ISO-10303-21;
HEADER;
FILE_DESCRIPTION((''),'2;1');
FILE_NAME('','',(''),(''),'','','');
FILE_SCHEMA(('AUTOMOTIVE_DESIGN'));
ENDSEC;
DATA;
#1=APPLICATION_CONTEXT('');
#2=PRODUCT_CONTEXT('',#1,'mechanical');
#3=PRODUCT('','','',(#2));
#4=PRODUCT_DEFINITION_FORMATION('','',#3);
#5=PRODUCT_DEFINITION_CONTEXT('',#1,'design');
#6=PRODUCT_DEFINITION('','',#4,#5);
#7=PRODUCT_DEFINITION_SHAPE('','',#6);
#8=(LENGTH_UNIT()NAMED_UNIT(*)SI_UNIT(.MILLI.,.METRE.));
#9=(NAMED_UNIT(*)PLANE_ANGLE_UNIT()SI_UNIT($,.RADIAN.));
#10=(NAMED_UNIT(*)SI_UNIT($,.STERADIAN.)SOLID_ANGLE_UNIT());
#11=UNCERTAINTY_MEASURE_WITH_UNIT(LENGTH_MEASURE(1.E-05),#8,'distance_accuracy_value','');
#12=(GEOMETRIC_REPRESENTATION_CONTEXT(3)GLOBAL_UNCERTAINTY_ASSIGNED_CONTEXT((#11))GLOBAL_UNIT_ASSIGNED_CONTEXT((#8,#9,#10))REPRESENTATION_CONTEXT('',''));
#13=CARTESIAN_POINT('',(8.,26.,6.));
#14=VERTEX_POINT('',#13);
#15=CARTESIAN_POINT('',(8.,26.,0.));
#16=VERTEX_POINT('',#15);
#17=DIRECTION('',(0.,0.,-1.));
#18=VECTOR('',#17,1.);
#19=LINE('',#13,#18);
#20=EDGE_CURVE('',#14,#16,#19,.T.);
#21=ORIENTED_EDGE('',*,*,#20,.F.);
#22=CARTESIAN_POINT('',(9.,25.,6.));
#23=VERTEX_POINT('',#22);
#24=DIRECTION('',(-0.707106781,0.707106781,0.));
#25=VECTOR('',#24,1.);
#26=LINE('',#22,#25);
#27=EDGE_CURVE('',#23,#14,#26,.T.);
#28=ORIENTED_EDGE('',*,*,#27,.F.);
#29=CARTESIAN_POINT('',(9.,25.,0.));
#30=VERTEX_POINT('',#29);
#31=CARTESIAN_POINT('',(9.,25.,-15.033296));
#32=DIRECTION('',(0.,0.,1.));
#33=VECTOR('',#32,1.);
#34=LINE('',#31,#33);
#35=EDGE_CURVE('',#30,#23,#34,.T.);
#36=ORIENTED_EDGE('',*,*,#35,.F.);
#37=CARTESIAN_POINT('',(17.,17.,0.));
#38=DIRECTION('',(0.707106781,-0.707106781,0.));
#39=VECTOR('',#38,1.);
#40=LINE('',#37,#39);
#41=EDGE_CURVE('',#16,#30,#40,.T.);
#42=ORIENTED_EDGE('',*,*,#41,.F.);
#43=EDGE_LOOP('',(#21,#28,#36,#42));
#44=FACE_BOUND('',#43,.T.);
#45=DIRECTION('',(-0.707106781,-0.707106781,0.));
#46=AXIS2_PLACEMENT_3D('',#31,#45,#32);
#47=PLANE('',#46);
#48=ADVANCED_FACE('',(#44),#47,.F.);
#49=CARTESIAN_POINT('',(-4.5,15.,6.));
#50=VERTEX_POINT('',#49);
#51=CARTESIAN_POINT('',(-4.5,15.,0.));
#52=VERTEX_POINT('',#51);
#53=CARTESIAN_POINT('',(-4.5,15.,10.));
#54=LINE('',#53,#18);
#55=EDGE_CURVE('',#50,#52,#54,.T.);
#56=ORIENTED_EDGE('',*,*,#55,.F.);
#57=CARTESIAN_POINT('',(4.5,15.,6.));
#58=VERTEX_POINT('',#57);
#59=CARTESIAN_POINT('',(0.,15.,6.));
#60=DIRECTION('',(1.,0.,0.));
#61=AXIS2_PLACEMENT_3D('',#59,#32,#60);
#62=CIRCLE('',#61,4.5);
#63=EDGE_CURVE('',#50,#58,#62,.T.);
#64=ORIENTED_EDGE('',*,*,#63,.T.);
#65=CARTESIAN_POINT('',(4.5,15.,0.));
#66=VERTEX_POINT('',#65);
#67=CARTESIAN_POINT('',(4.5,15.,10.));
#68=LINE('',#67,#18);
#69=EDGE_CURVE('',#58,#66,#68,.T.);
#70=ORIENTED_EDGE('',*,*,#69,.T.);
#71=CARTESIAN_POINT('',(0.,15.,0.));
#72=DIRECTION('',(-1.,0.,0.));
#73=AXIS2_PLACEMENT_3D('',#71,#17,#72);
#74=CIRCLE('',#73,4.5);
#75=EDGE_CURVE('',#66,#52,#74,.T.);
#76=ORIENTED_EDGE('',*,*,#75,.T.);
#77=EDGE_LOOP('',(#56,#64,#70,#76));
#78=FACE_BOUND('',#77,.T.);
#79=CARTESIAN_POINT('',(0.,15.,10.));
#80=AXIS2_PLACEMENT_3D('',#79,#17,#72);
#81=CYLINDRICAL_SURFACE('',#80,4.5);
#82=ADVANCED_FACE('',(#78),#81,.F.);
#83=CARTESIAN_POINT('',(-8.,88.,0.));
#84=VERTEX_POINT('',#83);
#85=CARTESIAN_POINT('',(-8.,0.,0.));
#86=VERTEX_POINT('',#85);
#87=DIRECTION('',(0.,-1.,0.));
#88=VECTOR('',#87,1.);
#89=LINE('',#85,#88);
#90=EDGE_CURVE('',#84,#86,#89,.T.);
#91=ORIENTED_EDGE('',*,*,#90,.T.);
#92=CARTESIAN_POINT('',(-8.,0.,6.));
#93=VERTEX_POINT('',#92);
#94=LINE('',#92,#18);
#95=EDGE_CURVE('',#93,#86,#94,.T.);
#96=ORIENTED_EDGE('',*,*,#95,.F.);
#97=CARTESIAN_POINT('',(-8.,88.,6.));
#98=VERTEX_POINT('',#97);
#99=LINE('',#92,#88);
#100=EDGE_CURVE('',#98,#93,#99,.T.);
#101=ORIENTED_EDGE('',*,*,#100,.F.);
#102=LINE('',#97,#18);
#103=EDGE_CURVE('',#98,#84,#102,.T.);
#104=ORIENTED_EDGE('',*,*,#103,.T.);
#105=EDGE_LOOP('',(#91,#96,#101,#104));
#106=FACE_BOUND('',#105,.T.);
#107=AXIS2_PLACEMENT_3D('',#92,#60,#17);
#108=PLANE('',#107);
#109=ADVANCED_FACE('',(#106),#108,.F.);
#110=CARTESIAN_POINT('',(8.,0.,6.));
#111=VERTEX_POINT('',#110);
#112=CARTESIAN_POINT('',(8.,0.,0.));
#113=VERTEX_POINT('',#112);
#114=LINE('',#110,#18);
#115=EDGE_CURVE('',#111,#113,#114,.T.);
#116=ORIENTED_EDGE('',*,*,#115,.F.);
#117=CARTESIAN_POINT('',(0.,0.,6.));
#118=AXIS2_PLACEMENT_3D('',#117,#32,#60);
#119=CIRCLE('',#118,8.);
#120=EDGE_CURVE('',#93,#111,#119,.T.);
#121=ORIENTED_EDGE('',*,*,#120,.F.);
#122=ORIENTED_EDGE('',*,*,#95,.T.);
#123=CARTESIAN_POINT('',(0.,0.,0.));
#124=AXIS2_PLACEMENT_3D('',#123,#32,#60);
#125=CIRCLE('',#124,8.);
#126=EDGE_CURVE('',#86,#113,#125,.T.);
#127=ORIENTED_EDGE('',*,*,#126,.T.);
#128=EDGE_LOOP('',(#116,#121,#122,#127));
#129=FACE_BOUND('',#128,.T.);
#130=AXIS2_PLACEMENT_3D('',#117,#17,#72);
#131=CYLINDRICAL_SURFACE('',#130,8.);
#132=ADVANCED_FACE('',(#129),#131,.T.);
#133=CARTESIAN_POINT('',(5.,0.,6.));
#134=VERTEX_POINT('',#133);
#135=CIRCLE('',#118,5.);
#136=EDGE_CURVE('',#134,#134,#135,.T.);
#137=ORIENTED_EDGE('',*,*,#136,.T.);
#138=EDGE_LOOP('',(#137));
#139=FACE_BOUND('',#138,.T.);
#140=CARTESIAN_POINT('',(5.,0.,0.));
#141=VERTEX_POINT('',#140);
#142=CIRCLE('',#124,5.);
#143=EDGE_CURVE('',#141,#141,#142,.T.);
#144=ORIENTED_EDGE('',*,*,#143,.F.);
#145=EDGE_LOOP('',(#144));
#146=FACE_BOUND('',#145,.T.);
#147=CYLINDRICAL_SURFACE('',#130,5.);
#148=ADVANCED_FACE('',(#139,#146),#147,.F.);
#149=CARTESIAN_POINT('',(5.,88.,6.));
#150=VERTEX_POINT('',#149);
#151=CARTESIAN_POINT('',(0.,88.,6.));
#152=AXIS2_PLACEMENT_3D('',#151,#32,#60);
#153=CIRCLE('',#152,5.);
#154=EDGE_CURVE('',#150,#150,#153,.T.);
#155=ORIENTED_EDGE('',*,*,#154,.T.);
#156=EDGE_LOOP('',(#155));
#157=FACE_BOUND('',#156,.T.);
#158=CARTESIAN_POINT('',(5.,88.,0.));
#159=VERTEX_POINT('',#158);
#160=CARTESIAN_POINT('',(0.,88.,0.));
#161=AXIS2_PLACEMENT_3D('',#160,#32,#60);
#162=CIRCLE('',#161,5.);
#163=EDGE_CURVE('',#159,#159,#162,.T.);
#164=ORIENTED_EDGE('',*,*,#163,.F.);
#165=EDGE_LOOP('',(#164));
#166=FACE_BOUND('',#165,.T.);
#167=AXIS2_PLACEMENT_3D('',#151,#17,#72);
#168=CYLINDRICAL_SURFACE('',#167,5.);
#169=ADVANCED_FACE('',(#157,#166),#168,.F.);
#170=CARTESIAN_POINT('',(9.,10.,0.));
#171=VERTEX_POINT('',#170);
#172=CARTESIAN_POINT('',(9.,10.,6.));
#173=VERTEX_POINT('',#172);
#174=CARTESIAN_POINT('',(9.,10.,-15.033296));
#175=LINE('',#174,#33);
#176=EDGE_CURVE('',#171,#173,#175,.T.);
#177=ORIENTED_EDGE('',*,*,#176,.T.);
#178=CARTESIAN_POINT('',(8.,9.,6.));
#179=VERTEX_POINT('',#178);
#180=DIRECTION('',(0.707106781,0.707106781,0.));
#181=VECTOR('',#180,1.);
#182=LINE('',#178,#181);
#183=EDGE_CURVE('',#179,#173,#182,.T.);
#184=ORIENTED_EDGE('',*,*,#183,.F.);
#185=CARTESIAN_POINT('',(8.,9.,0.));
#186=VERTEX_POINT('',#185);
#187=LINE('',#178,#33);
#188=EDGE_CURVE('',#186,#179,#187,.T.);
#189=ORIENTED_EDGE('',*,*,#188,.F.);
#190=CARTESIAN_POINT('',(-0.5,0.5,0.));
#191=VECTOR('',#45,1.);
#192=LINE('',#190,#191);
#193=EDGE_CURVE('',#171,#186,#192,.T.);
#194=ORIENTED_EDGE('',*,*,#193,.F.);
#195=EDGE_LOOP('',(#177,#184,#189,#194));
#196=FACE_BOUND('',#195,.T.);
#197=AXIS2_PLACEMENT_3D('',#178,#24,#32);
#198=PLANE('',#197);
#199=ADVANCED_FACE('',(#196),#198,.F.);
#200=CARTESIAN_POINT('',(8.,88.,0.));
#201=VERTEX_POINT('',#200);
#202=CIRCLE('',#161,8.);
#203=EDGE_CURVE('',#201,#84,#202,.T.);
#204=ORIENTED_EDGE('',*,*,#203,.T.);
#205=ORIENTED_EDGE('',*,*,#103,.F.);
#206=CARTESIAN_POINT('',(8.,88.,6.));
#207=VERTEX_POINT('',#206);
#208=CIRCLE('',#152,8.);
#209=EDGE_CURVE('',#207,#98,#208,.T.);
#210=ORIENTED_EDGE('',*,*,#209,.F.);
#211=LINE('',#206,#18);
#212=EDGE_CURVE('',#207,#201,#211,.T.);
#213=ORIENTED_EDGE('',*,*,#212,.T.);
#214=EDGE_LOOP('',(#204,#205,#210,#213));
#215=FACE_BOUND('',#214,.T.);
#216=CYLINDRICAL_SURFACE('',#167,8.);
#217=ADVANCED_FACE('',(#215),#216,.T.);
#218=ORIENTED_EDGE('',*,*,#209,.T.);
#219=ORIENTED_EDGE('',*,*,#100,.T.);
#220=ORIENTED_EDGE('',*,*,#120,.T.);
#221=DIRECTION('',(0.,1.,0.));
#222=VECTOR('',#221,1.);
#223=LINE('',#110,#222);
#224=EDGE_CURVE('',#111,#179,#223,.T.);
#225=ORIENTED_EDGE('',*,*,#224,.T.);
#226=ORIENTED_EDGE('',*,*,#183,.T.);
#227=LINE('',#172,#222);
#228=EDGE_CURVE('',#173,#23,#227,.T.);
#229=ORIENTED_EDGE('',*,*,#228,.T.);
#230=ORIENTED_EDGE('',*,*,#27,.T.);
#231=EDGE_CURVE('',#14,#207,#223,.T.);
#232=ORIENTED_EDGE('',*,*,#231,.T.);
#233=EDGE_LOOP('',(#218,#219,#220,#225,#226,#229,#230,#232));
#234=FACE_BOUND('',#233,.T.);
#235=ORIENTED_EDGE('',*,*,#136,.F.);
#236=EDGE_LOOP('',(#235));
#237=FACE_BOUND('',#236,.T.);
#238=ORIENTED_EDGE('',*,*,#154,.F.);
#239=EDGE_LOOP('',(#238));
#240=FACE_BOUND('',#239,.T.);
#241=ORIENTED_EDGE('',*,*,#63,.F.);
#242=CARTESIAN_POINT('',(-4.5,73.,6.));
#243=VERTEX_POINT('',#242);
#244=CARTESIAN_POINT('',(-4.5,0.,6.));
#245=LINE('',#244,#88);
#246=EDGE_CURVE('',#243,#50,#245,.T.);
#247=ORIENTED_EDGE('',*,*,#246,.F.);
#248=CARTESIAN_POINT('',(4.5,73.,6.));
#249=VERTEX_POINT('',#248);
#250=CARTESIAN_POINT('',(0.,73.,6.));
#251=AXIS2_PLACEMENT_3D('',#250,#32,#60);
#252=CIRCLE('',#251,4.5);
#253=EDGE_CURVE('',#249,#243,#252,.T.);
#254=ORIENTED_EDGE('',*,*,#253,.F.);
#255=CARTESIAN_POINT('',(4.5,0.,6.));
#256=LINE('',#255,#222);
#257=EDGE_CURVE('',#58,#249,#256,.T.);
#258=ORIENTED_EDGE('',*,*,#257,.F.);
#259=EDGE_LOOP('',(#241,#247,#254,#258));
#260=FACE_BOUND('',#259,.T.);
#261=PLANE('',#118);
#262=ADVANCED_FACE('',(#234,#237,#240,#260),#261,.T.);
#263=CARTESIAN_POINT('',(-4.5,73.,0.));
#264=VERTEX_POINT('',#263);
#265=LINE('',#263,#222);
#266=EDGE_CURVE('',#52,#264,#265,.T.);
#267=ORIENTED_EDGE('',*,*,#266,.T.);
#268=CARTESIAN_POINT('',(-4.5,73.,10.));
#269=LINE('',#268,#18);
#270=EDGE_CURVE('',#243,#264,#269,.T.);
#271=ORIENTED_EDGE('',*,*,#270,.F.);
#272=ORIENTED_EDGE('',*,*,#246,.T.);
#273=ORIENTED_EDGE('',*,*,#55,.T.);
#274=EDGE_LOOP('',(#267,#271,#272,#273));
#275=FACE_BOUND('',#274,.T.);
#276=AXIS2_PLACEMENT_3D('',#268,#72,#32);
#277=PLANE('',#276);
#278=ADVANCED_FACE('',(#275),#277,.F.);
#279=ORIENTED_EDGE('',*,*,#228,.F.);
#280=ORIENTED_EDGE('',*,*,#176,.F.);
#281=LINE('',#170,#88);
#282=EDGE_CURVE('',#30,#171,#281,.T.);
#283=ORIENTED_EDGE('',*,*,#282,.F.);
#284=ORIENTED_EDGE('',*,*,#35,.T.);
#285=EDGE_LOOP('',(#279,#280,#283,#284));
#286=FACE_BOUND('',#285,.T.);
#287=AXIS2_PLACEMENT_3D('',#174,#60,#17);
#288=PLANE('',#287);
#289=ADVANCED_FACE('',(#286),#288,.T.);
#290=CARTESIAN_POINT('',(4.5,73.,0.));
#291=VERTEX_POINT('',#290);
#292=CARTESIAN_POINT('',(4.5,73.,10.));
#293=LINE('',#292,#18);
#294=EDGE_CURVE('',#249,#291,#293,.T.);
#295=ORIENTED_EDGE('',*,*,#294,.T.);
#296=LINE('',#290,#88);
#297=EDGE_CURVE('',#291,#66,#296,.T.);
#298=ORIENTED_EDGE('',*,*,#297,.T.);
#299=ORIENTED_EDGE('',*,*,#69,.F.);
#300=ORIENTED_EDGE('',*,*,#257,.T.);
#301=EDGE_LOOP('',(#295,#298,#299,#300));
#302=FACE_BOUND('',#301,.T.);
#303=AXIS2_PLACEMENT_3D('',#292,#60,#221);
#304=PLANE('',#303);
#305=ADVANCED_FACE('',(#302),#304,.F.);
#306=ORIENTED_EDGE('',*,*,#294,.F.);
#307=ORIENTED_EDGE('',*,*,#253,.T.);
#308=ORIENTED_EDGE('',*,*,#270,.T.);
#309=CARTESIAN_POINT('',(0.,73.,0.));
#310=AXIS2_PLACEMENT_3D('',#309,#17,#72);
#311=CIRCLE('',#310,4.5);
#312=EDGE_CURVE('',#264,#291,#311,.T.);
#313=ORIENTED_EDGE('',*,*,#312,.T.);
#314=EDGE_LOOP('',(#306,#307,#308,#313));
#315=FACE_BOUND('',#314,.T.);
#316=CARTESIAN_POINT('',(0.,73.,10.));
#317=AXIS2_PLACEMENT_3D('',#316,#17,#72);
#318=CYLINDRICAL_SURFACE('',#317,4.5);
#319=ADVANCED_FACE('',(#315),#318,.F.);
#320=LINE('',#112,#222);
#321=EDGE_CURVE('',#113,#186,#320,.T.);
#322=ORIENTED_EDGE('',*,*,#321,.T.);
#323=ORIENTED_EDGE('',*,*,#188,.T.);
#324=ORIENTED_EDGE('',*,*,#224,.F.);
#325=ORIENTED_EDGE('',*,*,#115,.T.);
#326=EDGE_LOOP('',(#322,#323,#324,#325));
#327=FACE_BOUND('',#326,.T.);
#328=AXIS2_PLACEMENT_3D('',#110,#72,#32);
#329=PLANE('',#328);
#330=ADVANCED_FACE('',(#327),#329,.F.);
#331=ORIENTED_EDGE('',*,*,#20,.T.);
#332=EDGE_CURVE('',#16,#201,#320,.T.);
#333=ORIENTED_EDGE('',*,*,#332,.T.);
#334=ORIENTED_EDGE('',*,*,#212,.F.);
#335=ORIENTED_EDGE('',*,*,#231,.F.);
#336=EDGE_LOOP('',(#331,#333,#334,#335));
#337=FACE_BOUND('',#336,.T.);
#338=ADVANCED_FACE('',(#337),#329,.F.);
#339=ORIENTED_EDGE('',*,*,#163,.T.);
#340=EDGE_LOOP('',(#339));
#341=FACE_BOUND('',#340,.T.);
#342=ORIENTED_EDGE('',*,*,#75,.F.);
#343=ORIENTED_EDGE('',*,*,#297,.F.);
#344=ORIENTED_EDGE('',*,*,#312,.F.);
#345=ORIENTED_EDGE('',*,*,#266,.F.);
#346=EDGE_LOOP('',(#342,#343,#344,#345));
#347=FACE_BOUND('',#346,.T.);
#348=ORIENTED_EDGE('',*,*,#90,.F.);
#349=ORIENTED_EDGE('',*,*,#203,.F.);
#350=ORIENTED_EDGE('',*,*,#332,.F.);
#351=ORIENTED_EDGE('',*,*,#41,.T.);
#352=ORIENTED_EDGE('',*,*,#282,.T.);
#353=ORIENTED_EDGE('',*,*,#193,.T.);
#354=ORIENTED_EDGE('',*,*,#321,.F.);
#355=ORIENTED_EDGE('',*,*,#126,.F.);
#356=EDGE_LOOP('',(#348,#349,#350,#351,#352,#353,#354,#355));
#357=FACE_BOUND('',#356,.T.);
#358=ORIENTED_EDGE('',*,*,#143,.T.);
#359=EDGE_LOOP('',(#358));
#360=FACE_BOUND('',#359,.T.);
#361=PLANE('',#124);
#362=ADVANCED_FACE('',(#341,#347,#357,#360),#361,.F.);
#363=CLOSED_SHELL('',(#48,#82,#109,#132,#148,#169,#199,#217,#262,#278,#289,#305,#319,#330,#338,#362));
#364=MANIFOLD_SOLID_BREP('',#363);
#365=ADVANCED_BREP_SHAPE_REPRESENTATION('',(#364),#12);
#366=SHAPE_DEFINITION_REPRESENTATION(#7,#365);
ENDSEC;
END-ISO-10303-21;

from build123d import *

# Parameters (mm, degrees)
SKETCH_1_R          = 5
EXTRUDE_1_DEPTH     = 6
CUT_EXTRUDE_1_DEPTH = 10
SKETCH_3_W          = 1
SKETCH_3_H          = 15
EXTRUDE_2_DEPTH     = 6
CHAMFER_1_SIZE      = 1


with BuildPart() as part:
    # 草图1 → 凸台-拉伸1 (new body)
    with BuildSketch(Plane.XY):
        with BuildLine():
            Line((-8, 0), (-8, 88))
            ThreePointArc((-8, 88), (0, 96), (8, 88))
            Line((8, 88), (8, 0))
            ThreePointArc((8, 0), (0, -8), (-8, 0))
        make_face()
        with Locations((0, 88)):
            Circle(SKETCH_1_R, mode=Mode.SUBTRACT)
        Circle(SKETCH_1_R, mode=Mode.SUBTRACT)
    extrude(amount=EXTRUDE_1_DEPTH)

    # 草图2 → 切除-拉伸1 (cut)
    with BuildSketch(Plane(origin=(0, 0, 0), x_dir=(-1, 0, 0), z_dir=(0, 0, -1))):
        with BuildLine():
            Line((4.5, 73), (4.5, 15))
            ThreePointArc((4.5, 15), (0, 10.5), (-4.5, 15))
            Line((-4.5, 15), (-4.5, 73))
            ThreePointArc((-4.5, 73), (0, 77.5), (4.5, 73))
        make_face()
    extrude(amount=-CUT_EXTRUDE_1_DEPTH, mode=Mode.SUBTRACT)

    # 草图3 → 凸台-拉伸2 (add)
    with BuildSketch(Plane.XY.offset(6)):
        with Locations((8.5, 17.5)):
            Rectangle(SKETCH_3_W, SKETCH_3_H)
    extrude(amount=-EXTRUDE_2_DEPTH)

    # 倒角1
    chamfer_1_edges = [part.edges().sort_by_distance(p)[0] for p in [
        (8, 10, 3),
        (8, 25, 3),
    ]]
    chamfer(chamfer_1_edges, length=CHAMFER_1_SIZE - 0.0001)  # a hair under: the kernel refuses the full size


solid = part.part
